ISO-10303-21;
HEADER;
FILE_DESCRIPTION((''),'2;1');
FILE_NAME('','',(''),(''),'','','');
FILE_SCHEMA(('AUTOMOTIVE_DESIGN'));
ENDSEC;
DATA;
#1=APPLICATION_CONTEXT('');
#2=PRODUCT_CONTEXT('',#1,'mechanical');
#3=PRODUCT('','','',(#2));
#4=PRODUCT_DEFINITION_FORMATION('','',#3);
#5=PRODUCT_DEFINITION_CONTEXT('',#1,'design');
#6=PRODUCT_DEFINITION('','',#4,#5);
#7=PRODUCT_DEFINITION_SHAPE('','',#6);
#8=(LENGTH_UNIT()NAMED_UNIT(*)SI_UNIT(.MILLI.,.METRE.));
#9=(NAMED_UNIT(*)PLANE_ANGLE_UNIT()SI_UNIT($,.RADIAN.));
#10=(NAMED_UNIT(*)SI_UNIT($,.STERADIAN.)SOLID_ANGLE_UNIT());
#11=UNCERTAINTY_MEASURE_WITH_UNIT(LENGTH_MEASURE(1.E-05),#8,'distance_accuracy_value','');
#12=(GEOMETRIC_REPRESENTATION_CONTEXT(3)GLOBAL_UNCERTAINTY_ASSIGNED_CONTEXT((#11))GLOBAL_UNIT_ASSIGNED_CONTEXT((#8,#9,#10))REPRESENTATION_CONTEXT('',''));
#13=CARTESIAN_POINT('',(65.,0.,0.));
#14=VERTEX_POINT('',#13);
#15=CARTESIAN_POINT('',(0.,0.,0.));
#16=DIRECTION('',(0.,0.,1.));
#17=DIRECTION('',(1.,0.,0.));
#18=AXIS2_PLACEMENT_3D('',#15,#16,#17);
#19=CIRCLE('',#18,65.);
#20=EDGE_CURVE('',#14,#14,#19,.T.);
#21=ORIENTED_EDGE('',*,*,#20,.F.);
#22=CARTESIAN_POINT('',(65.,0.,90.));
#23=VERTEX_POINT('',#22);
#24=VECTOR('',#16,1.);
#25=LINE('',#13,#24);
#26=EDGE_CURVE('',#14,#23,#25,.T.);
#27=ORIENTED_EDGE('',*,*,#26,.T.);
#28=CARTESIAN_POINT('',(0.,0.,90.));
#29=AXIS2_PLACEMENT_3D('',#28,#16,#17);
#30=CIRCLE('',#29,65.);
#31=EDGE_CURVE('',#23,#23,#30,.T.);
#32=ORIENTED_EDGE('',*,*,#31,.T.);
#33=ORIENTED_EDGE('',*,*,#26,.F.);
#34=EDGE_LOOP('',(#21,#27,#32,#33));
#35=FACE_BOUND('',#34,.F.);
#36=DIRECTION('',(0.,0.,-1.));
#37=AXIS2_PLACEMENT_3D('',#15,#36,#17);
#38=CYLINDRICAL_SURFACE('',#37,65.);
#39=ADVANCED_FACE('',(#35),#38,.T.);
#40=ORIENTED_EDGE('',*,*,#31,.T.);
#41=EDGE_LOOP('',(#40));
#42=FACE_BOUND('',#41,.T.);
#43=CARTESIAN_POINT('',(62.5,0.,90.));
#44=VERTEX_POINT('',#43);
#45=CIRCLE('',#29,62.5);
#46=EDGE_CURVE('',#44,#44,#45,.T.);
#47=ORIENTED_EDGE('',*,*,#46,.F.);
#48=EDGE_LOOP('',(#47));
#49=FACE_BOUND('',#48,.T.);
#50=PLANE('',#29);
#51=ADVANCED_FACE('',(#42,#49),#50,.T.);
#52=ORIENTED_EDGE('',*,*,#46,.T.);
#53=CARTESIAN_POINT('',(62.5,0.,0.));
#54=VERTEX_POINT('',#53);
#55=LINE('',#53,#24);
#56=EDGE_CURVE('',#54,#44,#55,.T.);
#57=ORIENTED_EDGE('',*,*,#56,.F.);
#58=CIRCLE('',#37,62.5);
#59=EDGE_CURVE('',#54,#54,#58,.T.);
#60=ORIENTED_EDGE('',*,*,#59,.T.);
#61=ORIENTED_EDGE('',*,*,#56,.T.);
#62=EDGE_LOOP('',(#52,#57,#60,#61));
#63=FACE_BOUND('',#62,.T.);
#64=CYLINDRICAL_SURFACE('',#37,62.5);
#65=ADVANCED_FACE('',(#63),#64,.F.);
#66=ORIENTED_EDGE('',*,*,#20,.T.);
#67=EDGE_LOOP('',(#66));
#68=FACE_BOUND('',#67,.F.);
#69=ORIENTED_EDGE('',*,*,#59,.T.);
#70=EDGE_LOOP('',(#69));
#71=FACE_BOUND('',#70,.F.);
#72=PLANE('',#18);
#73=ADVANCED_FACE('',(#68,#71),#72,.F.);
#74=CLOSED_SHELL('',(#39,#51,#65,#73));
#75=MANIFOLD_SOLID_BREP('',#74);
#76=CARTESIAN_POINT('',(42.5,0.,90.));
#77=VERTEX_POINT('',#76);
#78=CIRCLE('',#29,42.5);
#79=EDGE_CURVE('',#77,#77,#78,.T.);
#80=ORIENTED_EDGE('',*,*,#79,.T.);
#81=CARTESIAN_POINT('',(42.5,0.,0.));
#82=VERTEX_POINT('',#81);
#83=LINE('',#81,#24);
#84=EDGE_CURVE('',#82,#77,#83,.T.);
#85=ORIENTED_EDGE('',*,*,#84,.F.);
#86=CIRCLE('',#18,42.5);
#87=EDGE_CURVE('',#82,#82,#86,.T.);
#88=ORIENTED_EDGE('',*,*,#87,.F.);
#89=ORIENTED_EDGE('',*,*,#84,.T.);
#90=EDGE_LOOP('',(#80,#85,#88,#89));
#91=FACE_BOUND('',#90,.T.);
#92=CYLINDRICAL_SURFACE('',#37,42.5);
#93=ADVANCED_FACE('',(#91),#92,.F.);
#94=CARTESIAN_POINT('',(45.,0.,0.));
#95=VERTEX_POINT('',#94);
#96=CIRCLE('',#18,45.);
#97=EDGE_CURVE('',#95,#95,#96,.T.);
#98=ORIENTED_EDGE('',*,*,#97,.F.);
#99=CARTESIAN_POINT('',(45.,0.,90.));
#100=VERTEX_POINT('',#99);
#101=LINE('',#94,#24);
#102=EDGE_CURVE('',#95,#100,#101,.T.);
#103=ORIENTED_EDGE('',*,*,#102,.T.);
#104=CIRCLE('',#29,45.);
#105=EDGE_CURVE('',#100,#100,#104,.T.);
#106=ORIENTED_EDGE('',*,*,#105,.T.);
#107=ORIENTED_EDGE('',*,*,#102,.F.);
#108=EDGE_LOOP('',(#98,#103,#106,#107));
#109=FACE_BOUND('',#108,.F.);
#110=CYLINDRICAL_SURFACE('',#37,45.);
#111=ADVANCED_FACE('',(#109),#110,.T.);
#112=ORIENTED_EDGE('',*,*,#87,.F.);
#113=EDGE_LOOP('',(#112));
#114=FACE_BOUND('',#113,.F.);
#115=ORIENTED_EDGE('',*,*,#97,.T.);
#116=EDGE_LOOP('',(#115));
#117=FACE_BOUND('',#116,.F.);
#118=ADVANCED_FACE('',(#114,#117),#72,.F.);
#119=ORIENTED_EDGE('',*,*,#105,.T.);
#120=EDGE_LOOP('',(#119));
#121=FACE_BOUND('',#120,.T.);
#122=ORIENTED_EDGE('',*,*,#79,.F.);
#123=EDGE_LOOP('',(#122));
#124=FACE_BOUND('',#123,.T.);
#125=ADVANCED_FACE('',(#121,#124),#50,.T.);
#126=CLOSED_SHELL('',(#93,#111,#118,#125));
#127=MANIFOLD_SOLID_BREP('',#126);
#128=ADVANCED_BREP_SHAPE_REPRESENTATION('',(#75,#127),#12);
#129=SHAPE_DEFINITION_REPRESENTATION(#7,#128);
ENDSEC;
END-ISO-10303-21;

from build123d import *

# Parameters (mm, degrees)
F0_R     = 65
F0_R_2   = 62.5
F1_DEPTH = 90
F0_R_3   = 45
F0_R_4   = 42.5
F2_W     = 130
F2_H     = 65
F3_DEPTH = 250


# Not quite as in the source:
# - an extrude ends at something that could not be found from the text; its depth is read off the source's solid


with BuildPart() as f1:
    # F0 (on Top) → F1 (new body)
    with BuildSketch(Plane.XY):
        Circle(F0_R)
        Circle(F0_R_2, mode=Mode.SUBTRACT)
    extrude(amount=F1_DEPTH)

    # F2 (on Top) → F3 (cut, through all)
    with BuildSketch(Plane.XY):
        with Locations((0, -32.5)):
            Rectangle(F2_W, F2_H)
    extrude(amount=-F3_DEPTH, mode=Mode.SUBTRACT)


with BuildPart() as f1b:
    # F0 (on Top) → F1, piece 2 (new body)
    with BuildSketch(Plane.XY):
        Circle(F0_R_3)
        Circle(F0_R_4, mode=Mode.SUBTRACT)
    extrude(amount=F1_DEPTH)


solid = Compound([f1.part, f1b.part])
